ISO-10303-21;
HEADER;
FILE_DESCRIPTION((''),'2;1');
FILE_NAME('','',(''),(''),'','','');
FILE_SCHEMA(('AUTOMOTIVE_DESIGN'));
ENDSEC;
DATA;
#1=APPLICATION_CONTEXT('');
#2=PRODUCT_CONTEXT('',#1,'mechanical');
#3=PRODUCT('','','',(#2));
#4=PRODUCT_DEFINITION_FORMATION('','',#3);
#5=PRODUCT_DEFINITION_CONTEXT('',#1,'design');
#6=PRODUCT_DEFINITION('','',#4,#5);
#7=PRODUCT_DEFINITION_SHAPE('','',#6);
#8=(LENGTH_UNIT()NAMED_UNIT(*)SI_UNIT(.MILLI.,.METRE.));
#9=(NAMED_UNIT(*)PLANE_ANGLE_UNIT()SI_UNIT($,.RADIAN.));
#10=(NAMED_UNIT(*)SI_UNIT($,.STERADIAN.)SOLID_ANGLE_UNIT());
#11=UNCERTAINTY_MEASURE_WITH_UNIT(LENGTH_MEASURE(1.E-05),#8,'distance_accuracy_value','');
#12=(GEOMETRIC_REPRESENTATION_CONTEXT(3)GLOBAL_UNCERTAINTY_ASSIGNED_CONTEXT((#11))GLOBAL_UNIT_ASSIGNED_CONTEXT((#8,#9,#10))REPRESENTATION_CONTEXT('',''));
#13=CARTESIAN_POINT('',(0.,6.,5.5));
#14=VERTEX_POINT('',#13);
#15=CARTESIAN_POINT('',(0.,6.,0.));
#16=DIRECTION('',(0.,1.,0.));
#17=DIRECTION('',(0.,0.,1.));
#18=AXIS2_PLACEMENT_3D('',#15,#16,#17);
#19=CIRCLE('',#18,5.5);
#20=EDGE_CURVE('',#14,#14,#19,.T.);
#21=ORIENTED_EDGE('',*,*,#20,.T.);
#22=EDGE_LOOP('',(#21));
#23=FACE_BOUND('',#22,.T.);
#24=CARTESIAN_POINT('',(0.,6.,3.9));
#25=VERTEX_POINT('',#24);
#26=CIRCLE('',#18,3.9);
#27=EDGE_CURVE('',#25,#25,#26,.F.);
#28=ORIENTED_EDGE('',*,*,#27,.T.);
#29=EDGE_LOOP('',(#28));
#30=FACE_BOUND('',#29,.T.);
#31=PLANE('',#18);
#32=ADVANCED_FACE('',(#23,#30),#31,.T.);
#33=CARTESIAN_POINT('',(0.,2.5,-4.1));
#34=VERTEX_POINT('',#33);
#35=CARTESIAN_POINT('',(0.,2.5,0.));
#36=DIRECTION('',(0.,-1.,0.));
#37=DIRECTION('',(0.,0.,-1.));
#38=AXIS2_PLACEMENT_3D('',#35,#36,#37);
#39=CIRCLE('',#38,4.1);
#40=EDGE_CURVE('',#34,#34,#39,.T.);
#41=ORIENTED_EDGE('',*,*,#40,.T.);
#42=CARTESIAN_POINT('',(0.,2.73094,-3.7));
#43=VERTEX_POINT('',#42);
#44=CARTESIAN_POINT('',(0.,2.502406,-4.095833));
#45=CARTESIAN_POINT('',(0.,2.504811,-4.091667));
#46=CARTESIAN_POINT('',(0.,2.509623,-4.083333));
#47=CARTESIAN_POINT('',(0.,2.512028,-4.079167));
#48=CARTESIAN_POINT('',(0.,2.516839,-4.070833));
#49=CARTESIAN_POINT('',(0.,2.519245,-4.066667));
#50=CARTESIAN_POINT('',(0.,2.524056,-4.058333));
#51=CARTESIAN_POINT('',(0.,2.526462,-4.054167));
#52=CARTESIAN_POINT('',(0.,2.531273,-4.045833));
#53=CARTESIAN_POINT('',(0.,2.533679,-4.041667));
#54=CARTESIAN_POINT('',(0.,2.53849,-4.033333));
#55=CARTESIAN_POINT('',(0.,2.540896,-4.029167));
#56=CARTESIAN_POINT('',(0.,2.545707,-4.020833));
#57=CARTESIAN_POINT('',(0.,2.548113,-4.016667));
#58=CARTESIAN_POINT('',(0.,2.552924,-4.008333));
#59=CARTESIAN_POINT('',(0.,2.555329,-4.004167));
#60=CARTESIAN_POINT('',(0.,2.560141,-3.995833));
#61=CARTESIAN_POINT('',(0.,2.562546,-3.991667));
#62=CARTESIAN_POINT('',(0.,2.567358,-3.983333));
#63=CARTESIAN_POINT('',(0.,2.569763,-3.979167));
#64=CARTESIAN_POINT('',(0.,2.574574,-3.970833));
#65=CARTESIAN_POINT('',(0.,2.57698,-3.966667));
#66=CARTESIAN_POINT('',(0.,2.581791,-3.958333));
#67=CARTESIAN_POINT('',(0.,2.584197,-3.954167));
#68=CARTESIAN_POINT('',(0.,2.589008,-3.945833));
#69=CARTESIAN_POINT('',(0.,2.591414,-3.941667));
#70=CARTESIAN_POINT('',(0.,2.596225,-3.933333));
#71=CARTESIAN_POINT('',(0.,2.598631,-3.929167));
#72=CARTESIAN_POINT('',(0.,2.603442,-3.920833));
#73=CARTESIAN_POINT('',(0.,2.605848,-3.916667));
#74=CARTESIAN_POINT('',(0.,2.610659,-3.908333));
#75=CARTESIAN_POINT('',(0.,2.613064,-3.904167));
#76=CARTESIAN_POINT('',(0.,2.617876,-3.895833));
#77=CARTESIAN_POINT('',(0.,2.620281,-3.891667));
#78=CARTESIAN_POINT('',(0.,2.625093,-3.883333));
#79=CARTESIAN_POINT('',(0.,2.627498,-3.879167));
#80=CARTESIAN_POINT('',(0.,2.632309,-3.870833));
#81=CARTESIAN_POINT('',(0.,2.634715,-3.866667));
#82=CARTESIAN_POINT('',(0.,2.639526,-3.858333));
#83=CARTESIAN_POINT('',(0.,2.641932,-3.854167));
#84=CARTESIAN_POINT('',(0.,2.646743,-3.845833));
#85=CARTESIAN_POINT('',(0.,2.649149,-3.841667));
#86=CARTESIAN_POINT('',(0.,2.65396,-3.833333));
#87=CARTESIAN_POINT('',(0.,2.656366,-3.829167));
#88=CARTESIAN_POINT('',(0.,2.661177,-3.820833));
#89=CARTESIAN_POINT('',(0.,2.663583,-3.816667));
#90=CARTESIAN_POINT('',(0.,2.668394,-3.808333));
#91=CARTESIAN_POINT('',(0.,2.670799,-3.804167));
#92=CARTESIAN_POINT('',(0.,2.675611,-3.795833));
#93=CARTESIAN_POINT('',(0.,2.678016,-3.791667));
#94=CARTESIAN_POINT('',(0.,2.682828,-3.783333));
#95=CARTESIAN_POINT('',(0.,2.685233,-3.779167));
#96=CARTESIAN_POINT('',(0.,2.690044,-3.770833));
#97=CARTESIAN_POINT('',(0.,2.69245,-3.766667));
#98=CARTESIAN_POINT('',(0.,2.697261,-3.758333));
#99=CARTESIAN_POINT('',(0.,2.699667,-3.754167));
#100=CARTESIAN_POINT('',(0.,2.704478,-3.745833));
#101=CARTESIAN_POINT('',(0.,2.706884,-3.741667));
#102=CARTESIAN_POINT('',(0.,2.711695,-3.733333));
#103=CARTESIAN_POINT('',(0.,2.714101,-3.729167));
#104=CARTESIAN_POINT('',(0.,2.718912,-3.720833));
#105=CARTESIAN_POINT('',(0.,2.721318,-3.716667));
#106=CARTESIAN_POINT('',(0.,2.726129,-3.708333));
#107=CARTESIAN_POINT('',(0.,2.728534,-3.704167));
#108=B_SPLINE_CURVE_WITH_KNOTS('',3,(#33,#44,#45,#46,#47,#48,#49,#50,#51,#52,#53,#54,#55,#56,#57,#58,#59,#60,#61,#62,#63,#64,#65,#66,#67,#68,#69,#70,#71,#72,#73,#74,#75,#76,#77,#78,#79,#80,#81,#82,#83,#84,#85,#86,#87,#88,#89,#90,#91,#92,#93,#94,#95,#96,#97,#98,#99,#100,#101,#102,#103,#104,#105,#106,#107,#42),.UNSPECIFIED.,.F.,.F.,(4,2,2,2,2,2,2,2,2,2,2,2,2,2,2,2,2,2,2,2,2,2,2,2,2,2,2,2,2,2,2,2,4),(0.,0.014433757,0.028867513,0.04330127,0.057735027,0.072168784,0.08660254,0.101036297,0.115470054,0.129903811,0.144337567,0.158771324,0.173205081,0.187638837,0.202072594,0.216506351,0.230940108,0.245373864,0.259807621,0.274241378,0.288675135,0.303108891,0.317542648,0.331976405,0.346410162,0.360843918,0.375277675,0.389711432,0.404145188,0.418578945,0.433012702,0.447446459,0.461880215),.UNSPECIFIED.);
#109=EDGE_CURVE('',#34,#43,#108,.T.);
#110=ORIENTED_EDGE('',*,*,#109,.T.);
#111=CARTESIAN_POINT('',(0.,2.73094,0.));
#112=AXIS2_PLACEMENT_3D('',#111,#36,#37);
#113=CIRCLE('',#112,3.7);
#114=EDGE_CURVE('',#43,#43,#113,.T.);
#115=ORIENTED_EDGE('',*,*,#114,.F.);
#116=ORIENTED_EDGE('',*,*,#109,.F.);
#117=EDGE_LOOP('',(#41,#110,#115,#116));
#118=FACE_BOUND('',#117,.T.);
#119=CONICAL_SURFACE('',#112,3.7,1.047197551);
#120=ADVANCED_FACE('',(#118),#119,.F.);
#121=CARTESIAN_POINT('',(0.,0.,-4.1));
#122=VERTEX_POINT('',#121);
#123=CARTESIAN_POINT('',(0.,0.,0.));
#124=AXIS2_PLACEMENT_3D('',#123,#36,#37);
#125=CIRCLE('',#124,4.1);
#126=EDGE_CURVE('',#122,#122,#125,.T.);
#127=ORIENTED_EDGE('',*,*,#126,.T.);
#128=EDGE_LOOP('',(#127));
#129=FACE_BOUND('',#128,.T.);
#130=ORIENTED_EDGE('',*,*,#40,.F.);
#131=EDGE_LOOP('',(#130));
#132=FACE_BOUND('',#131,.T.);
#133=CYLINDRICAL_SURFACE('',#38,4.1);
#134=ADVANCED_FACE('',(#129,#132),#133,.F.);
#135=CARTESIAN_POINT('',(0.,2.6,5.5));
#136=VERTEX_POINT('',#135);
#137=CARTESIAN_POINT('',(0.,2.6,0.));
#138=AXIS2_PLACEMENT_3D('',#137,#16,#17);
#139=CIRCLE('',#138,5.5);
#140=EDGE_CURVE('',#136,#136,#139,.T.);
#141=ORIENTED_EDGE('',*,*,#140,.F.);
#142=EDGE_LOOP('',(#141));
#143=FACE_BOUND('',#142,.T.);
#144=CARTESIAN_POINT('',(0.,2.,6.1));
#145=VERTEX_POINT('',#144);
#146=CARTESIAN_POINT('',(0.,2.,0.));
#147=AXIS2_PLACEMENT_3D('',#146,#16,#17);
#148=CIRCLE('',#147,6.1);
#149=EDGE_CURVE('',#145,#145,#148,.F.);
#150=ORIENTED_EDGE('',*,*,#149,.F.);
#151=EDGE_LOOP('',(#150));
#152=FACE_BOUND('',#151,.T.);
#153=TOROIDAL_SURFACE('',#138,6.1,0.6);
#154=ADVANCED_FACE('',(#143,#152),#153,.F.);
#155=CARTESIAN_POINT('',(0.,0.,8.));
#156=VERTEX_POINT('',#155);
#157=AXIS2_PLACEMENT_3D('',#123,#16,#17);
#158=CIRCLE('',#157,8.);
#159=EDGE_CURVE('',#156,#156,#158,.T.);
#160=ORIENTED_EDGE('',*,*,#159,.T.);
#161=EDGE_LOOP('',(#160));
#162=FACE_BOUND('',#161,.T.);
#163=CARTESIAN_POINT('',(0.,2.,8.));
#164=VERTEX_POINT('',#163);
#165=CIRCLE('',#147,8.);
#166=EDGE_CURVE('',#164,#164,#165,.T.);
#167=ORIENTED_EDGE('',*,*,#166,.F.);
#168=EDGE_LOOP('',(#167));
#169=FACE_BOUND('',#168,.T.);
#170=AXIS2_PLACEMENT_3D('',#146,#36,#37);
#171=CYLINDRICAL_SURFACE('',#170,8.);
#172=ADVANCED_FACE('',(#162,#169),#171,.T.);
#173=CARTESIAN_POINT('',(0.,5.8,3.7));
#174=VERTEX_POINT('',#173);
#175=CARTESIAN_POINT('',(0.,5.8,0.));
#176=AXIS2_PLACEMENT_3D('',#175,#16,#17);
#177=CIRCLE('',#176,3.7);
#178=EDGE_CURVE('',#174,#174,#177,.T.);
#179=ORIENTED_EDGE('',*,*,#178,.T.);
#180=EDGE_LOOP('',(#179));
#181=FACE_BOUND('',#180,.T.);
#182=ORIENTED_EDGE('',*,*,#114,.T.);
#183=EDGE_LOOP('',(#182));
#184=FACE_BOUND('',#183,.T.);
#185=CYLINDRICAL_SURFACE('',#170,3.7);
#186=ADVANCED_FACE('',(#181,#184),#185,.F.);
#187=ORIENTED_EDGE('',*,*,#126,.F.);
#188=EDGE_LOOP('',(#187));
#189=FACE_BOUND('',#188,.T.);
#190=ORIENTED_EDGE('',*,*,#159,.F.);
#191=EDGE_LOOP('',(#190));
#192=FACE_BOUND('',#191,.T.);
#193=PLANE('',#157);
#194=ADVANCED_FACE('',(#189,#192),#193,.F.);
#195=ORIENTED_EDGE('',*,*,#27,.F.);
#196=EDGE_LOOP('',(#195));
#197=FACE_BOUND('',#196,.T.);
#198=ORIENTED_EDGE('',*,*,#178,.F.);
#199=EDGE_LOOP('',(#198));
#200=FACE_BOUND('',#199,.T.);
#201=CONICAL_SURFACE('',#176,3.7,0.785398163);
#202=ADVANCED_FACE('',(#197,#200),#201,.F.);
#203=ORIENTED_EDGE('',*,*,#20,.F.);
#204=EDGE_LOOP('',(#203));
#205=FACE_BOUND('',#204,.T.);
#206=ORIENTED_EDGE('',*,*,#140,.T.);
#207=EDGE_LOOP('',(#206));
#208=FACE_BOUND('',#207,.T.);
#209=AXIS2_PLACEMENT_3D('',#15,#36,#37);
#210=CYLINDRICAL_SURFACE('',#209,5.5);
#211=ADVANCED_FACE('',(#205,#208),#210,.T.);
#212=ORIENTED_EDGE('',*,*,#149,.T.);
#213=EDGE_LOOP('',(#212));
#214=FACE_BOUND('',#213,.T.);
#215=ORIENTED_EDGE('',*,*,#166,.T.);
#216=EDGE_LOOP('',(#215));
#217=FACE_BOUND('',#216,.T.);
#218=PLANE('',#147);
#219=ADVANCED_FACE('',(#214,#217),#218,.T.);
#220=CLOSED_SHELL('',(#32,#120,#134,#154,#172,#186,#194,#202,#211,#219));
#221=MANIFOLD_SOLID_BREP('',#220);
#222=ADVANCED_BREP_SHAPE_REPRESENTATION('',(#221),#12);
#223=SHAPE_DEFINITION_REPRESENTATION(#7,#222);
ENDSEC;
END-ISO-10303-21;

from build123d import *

# Parameters (mm, degrees)
SKETCH1_R           = 8
SKETCH1_R_2         = 3.7
BOSS_EXTRUDE1_DEPTH = 2
SKETCH2_R           = 5.5
SKETCH2_R_2         = 3.7
BOSS_EXTRUDE2_DEPTH = 4
FILLET2_R           = 0.6
CHAMFER2_SIZE       = 0.2
SKETCH3_R           = 4.1
CUT_EXTRUDE1_DEPTH  = 2.5
CHAMFER3_SIZE2      = 0.4
CHAMFER3_SIZE       = 0.230940108


with BuildPart() as part:
    # Sketch1 → Boss-Extrude1 (new body)
    with BuildSketch(Plane(origin=(0, 0, 0), x_dir=(1, 0, 0), z_dir=(0, 1, 0))):
        with Locations(Location((0, 0, 0), (0, 0, 270))):
            Circle(SKETCH1_R)
        with Locations(Location((0, 0, 0), (0, 0, 270))):
            Circle(SKETCH1_R_2, mode=Mode.SUBTRACT)
    extrude(amount=BOSS_EXTRUDE1_DEPTH)

    # Sketch2 → Boss-Extrude2 (add)
    with BuildSketch(Plane(origin=(0, 2, 0), x_dir=(1, 0, 0), z_dir=(0, 1, 0))):
        with Locations(Location((0, 0, 0), (0, 0, 270))):
            Circle(SKETCH2_R)
        with Locations(Location((0, 0, 0), (0, 0, 270))):
            Circle(SKETCH2_R_2, mode=Mode.SUBTRACT)
    extrude(amount=BOSS_EXTRUDE2_DEPTH)

    # Fillet2
    fillet2_edges = [part.edges().sort_by_distance(p)[0] for p in [
        (0, 2, -5.5),
    ]]
    fillet(fillet2_edges, radius=FILLET2_R)

    # Chamfer2
    chamfer2_edges = [part.edges().sort_by_distance(p)[0] for p in [
        (0, 6, -3.7),
    ]]
    chamfer(chamfer2_edges, length=CHAMFER2_SIZE)

    # Sketch3 → Cut-Extrude1 (cut)
    with BuildSketch(Plane.XZ):
        with Locations(Location((0, 0, 0), (0, 0, 270))):
            Circle(SKETCH3_R)
    extrude(amount=-CUT_EXTRUDE1_DEPTH, mode=Mode.SUBTRACT)

    # Chamfer3
    chamfer3_edges = [part.edges().sort_by_distance(p)[0] for p in [
        (0, 2.5, -3.7),
    ]]
    chamfer3_side = [part.faces().sort_by_distance(p)[0] for p in [
        (0, 2.504618802, -3.7),
    ]]
    chamfer(chamfer3_edges, length=CHAMFER3_SIZE - 0.0001, length2=CHAMFER3_SIZE2 - 0.0001, reference=chamfer3_side[0])  # a hair under: the kernel refuses the full size


solid = part.part
